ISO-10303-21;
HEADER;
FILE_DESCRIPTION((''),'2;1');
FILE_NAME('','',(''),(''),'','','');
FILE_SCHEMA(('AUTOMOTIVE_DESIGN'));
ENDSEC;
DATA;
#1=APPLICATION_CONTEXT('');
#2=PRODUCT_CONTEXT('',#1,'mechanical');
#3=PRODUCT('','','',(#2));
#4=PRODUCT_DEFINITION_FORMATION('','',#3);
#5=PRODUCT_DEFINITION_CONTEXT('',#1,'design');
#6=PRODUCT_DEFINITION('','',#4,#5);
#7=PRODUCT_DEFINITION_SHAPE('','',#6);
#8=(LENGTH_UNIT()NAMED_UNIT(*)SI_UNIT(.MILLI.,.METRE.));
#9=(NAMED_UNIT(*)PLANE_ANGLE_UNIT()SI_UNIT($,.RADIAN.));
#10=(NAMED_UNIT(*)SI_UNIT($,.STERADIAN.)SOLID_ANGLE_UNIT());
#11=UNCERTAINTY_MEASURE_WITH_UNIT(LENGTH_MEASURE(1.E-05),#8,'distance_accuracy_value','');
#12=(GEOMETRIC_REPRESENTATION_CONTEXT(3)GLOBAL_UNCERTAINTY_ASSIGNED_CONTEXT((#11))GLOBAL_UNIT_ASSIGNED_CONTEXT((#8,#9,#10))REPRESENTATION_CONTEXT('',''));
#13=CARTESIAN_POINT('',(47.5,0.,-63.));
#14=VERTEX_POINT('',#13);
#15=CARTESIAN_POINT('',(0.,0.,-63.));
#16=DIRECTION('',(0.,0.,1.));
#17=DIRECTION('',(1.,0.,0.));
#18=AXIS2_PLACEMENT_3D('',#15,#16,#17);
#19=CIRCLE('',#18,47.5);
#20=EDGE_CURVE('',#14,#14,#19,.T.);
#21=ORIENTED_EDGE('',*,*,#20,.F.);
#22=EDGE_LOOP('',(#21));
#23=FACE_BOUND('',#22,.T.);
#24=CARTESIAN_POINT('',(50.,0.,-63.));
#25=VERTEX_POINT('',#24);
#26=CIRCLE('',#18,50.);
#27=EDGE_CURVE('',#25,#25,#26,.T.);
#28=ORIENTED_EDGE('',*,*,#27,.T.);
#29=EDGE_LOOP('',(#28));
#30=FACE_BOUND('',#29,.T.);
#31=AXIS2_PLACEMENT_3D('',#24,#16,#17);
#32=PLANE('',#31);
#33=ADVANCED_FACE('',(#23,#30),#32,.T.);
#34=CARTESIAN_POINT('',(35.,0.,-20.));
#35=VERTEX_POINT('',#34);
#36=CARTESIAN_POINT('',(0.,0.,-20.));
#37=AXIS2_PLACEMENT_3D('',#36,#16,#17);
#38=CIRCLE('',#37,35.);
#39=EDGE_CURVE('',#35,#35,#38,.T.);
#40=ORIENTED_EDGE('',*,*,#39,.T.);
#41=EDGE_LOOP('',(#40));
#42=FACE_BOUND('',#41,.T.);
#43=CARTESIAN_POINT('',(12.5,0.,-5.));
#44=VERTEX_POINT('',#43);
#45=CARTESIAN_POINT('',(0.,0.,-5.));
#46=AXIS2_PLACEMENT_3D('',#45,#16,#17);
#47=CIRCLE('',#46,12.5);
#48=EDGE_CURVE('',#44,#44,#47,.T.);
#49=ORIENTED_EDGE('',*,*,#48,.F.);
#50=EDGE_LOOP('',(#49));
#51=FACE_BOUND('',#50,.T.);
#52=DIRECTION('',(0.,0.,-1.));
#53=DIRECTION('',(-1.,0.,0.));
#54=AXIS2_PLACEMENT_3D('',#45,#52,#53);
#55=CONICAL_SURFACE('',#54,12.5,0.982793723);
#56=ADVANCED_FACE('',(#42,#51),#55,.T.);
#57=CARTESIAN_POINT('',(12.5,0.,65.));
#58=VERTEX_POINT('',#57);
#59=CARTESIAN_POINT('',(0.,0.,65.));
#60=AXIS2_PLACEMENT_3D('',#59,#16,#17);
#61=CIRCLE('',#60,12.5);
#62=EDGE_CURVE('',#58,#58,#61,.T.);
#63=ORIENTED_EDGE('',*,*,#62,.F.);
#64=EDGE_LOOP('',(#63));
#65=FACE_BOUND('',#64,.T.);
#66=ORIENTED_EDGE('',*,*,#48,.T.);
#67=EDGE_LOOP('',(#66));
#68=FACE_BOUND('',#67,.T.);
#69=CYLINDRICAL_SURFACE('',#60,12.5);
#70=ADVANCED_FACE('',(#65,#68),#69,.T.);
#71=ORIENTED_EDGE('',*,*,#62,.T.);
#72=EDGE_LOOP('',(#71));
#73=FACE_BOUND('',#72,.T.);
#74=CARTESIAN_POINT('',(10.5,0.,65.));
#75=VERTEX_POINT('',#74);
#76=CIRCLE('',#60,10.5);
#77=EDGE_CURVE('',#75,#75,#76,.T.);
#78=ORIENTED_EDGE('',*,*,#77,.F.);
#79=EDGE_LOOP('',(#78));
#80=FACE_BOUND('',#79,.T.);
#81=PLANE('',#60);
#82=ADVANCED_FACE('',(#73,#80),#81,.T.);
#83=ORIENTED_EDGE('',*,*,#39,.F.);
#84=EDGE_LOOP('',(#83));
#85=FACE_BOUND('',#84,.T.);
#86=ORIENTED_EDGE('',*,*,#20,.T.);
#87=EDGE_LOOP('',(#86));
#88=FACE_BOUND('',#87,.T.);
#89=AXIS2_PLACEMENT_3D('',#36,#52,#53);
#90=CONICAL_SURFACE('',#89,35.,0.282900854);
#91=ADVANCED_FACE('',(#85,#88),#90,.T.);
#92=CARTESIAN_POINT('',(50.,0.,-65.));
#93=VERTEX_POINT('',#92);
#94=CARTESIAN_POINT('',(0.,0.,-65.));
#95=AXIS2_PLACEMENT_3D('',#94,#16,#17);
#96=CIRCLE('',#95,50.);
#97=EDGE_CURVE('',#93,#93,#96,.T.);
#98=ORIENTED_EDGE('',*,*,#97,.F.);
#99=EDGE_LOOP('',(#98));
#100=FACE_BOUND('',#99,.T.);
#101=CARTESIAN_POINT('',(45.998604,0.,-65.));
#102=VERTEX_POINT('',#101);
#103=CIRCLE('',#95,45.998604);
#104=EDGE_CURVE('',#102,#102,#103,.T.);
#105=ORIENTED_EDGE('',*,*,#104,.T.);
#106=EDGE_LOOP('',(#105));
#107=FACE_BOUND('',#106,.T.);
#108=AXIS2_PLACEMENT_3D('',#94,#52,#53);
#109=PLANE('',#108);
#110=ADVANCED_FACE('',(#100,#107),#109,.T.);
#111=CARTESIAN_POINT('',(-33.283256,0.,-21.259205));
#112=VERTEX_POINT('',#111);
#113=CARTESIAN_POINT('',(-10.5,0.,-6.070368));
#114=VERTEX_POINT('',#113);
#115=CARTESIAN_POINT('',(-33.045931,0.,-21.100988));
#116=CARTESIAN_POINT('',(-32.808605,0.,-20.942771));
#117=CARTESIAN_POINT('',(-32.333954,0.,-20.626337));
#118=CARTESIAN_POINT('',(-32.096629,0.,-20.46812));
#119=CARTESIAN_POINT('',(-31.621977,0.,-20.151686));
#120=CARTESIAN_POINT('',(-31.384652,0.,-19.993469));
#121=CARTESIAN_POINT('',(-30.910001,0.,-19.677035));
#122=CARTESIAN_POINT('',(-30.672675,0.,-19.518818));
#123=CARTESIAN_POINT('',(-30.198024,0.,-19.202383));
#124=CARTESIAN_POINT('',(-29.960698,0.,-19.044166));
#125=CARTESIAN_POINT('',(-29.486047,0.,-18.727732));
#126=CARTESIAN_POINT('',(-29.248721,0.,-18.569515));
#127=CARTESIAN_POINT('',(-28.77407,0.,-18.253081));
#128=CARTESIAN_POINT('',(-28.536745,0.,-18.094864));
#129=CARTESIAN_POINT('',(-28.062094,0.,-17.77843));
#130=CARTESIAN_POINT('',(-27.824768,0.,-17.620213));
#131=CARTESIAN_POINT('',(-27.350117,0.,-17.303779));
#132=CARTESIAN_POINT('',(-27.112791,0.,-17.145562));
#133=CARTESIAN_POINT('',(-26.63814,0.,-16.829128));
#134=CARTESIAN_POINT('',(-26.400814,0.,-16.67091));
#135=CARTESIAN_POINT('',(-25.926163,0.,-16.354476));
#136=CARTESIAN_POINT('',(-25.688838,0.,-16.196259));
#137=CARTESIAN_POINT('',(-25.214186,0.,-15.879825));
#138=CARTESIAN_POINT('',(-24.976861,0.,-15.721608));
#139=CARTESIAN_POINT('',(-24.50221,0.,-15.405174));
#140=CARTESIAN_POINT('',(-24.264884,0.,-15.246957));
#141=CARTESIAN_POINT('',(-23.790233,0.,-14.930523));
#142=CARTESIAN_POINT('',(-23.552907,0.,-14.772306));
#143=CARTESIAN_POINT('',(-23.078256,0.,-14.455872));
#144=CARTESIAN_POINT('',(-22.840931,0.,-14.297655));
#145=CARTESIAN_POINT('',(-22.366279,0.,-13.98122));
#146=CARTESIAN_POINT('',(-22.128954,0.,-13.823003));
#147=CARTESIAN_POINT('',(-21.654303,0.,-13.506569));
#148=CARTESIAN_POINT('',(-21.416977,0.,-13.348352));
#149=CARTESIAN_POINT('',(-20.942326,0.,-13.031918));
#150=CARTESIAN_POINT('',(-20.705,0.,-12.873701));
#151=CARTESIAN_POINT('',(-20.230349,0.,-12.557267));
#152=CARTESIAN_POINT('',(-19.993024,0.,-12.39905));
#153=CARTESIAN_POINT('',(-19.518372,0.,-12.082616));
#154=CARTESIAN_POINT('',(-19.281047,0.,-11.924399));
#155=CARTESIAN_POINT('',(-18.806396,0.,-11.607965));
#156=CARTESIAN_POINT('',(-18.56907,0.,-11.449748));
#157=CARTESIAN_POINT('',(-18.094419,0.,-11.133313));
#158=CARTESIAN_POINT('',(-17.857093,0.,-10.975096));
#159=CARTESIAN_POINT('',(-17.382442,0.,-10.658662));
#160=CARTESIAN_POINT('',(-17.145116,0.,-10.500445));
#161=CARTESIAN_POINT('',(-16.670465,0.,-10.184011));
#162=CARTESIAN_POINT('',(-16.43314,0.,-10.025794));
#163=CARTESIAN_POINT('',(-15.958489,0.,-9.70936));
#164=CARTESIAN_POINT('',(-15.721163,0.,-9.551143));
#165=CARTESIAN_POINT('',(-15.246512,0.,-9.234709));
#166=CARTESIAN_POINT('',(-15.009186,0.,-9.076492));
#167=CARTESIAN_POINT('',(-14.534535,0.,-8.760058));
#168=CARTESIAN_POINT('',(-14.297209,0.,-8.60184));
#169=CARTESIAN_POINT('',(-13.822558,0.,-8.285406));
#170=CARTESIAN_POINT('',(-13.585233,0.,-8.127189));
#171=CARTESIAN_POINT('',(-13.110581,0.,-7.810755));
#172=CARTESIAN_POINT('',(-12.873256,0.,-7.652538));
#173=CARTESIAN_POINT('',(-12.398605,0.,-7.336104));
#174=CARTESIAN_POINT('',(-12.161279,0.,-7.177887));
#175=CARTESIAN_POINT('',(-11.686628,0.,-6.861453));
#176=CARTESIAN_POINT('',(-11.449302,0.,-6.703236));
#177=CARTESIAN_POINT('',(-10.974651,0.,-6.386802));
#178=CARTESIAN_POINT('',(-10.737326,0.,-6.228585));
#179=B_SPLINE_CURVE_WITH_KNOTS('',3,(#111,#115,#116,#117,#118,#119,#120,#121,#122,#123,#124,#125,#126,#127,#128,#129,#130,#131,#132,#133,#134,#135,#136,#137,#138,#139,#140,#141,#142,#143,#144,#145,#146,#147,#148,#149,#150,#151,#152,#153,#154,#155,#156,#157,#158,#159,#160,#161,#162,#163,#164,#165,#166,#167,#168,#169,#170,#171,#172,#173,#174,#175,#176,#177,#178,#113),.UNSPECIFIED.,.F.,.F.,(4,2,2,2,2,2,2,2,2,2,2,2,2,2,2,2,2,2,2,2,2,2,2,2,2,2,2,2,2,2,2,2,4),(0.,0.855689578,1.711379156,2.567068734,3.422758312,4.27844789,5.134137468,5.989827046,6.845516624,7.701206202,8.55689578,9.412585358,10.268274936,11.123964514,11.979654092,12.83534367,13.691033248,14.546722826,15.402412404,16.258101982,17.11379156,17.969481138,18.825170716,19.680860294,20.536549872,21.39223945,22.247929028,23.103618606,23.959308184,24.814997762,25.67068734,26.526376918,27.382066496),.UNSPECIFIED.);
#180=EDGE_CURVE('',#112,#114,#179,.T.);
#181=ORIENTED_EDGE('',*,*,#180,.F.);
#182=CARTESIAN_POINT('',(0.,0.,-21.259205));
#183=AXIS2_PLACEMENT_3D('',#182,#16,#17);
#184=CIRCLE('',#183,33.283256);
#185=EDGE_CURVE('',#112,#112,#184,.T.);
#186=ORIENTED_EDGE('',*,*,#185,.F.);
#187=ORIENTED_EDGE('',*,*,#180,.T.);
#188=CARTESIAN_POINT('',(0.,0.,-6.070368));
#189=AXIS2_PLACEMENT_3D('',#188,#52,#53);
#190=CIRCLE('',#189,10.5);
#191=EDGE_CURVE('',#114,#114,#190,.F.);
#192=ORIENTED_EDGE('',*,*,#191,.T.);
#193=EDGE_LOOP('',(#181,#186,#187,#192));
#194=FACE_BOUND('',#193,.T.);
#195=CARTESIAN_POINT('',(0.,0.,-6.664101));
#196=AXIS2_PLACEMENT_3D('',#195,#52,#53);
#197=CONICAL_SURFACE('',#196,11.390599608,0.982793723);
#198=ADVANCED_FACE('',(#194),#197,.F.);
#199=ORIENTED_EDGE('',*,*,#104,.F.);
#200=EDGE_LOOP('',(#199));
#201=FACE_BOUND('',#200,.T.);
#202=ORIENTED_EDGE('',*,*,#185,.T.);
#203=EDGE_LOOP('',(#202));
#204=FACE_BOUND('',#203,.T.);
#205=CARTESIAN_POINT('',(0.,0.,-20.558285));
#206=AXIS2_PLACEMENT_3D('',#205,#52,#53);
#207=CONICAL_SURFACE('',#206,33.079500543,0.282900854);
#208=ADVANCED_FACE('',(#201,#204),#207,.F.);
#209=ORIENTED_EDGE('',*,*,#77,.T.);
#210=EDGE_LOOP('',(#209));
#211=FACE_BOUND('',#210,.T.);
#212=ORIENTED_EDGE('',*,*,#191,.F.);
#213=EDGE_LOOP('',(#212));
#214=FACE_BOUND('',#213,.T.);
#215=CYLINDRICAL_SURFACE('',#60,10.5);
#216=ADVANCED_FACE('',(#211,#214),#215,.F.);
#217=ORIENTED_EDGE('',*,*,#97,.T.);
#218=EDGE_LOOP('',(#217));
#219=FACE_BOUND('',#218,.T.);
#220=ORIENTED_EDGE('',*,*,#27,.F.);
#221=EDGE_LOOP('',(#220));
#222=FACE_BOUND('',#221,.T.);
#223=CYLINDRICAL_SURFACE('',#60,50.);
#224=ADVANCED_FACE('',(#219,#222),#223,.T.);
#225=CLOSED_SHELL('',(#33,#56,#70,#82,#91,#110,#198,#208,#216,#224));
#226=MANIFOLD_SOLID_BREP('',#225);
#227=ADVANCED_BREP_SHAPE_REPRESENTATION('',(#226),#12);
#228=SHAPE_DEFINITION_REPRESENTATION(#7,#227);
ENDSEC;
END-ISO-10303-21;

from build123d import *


# Read off the part's stored shape, not the designer's step: Vaciado1
with BuildPart() as part:
    # Croquis1 → Revolución1 (revolve)
    with BuildSketch(Plane(origin=(0, 0, 0), x_dir=(1, 0, 0), z_dir=(0, 1, 0))):
        Polygon((0, -65), (0, 65), (50, 65), (50, 63), (47.5, 63), (35, 20), (12.5, 5), (12.5, -65), align=None)
    revolve(axis=Axis((0, 0, 65), (0, 0, -1)))

    # Vaciado1 outline → Vaciado1 (revolve, cut)
    with BuildSketch(Plane.XZ):
        Polygon((45.99860382, -65), (33.283256487, -21.259205175), (10.5, -6.070367517), (10.5, 65), (0, 65), (0, -65), align=None)
    revolve(axis=Axis((0, 0, 0), (0, 0, 1)), mode=Mode.SUBTRACT)


solid = part.part
